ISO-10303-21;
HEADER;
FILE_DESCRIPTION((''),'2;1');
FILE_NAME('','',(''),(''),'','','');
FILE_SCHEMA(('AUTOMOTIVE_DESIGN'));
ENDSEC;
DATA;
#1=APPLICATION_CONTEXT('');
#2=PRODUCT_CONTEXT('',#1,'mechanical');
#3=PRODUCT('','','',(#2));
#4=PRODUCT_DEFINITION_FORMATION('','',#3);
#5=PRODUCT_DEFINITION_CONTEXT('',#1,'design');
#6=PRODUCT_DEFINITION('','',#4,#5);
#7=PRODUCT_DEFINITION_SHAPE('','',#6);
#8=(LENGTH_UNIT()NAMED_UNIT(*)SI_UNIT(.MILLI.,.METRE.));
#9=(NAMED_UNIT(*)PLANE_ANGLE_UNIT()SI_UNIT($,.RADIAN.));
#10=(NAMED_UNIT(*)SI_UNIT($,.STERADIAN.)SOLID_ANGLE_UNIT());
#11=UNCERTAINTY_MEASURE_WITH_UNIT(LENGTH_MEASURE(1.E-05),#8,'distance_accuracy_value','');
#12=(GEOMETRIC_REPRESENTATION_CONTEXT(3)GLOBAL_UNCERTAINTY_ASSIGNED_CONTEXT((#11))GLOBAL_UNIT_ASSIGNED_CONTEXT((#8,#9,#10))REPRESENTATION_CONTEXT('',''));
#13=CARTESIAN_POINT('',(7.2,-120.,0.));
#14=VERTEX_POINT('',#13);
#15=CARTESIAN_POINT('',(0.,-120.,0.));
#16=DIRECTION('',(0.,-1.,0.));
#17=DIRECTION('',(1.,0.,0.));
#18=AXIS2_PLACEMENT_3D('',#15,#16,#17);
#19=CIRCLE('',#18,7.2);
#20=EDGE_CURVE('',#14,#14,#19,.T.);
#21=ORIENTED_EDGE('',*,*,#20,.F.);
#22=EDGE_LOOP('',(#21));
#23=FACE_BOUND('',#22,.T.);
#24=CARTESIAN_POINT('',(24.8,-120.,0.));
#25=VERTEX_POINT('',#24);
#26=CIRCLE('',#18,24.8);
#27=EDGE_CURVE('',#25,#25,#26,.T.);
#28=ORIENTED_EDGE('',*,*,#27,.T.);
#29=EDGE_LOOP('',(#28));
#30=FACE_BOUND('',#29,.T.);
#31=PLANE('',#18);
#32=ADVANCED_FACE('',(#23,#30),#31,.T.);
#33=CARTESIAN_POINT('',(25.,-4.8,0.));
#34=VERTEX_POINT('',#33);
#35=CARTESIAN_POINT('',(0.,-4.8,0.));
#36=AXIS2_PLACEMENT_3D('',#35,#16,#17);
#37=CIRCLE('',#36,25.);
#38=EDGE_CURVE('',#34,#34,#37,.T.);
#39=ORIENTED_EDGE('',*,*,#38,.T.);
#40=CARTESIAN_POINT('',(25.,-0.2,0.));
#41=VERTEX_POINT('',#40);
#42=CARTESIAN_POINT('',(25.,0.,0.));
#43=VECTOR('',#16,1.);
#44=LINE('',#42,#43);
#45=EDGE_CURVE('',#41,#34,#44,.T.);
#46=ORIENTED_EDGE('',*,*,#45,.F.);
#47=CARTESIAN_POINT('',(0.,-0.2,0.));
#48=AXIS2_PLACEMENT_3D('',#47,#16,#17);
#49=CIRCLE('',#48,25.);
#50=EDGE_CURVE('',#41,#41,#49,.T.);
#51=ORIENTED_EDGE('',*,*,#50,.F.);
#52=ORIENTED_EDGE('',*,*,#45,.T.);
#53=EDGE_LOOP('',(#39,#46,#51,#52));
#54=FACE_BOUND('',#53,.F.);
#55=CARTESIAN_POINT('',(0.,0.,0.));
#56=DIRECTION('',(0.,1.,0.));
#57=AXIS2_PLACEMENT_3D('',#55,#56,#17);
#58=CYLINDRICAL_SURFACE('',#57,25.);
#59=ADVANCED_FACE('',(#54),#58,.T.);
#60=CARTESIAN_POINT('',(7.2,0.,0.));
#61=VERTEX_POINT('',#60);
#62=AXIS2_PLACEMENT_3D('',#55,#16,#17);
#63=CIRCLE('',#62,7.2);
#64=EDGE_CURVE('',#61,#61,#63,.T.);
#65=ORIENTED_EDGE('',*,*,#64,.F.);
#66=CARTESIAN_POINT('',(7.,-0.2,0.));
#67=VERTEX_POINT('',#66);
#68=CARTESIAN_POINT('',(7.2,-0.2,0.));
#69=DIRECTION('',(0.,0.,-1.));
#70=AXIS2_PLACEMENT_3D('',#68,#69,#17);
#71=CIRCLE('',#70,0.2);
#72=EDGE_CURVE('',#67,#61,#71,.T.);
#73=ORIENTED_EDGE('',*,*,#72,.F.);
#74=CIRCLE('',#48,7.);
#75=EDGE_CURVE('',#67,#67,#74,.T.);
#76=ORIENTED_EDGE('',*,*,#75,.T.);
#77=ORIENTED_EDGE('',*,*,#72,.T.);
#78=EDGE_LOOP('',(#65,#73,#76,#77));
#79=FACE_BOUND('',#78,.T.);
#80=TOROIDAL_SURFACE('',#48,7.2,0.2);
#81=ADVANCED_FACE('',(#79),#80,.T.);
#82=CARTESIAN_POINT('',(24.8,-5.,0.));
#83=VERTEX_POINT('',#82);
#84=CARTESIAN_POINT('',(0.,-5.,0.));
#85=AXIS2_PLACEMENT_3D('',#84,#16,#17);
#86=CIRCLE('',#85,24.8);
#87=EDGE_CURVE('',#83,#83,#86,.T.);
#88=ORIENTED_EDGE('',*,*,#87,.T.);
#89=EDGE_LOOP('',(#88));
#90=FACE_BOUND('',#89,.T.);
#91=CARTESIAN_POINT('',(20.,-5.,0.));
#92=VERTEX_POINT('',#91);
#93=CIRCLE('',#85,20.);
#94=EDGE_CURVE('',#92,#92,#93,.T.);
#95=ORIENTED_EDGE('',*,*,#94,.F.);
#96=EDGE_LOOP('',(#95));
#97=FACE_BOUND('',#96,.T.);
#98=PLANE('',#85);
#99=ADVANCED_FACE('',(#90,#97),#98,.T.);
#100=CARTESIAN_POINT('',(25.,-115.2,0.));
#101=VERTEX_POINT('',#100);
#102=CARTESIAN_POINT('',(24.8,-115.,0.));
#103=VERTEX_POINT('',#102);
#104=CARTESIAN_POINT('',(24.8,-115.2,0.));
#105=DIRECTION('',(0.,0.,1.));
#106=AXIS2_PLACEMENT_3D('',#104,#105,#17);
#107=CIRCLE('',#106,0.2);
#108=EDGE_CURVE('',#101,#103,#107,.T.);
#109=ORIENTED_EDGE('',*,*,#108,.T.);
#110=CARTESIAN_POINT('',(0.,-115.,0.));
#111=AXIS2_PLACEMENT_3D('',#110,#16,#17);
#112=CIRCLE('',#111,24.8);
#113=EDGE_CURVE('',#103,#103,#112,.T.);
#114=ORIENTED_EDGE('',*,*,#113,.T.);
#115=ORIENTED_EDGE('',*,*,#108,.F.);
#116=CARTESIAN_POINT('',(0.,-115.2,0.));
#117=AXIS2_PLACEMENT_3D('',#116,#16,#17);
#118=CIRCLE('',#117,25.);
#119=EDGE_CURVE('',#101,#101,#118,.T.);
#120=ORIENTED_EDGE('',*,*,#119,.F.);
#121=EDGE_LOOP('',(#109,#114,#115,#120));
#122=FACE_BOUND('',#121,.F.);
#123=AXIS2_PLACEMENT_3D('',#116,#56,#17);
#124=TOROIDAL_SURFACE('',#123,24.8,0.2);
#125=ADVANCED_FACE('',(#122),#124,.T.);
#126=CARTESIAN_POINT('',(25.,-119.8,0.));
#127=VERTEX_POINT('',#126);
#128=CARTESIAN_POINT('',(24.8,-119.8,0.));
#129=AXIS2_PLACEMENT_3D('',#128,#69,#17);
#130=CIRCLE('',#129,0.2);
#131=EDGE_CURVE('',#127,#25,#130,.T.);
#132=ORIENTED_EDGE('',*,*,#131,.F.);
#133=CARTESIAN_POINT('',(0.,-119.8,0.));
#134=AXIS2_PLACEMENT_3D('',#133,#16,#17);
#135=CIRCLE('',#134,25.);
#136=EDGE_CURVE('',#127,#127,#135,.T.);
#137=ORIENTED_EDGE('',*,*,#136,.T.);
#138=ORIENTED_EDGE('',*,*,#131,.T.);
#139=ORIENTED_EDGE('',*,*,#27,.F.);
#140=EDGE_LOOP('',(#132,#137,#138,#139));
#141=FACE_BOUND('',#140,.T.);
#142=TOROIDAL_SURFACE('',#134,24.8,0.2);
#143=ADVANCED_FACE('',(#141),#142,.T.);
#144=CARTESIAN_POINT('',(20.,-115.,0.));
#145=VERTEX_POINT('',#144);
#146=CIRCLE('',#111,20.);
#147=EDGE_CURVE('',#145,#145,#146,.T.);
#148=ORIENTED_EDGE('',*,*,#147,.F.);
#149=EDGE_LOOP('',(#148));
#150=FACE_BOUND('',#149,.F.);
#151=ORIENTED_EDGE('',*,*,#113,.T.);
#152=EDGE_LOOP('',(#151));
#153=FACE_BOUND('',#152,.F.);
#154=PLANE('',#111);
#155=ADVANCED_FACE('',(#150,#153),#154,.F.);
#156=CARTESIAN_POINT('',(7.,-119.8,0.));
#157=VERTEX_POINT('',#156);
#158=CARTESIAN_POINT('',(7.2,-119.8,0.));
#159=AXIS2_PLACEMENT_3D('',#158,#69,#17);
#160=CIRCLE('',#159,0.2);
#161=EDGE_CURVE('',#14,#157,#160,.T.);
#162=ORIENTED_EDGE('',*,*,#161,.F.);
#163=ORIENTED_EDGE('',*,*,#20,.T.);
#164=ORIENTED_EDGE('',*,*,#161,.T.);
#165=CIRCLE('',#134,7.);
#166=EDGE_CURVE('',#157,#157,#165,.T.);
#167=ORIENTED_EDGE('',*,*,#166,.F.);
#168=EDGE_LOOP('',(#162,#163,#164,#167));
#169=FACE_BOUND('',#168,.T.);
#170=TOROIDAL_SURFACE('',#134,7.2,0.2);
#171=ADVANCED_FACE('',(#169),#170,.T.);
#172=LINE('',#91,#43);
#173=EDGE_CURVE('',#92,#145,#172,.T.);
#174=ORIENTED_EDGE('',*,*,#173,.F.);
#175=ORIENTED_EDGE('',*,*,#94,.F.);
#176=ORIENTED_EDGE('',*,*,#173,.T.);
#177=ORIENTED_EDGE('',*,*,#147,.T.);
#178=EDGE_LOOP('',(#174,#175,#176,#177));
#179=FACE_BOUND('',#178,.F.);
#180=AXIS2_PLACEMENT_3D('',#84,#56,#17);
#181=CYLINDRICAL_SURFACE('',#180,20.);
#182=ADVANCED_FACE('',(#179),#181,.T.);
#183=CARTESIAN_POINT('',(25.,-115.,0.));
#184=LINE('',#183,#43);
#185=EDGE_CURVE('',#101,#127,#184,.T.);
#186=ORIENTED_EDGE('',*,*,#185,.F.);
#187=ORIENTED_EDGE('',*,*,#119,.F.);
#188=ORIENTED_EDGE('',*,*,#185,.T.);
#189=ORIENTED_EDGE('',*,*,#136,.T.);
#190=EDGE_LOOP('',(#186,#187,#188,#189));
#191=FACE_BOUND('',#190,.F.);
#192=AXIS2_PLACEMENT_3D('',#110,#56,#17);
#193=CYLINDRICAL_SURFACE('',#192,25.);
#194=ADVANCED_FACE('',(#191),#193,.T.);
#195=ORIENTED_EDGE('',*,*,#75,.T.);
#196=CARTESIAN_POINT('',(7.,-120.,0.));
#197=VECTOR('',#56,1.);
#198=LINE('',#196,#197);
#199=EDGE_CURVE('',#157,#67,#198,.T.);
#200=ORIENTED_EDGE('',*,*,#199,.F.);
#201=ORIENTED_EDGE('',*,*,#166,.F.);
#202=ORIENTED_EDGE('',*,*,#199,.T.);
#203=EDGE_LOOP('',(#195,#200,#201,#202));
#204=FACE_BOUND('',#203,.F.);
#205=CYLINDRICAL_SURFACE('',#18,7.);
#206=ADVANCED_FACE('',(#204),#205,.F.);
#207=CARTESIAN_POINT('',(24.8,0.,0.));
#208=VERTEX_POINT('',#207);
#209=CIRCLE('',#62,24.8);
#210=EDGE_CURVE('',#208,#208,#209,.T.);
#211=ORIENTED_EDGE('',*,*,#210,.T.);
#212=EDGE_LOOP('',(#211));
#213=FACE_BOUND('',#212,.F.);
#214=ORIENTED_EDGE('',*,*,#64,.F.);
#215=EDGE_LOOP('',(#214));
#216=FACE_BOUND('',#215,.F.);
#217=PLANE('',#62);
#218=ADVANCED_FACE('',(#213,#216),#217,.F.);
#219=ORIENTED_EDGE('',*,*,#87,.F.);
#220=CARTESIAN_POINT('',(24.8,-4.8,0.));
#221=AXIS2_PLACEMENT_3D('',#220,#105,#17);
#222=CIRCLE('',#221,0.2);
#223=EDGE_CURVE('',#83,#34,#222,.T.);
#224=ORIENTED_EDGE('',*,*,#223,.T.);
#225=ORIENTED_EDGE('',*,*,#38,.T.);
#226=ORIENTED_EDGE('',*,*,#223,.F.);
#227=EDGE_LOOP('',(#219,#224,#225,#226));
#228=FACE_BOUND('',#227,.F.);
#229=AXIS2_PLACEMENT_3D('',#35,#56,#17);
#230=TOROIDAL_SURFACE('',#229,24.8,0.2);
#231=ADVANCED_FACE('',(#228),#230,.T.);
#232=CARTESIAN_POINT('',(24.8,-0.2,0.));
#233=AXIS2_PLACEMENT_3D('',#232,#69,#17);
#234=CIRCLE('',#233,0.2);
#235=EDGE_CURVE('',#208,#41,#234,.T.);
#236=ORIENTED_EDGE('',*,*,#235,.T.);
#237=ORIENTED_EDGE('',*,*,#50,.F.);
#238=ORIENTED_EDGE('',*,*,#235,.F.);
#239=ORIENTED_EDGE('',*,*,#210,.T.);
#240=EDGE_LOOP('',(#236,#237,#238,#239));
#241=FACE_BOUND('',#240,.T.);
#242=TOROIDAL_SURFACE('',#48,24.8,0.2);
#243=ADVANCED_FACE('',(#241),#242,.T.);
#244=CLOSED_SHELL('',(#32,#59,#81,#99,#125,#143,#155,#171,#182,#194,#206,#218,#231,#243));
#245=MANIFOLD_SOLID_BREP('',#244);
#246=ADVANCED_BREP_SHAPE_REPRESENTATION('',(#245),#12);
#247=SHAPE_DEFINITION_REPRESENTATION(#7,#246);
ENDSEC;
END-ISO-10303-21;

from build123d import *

# Parameters (mm, degrees)
F0_R     = 25
F1_DEPTH = 5
F2_R     = 20
F3_DEPTH = 110
F5_R     = 25
F4_R     = 20
F6_DEPTH = 5
F7_R     = 7
F8_DEPTH = 200
F9_R     = 0.2


# Not quite as in the source:
# - a feature names something its author has since deleted; it is built from what else it names


with BuildPart() as f1:
    # F0 (on Front) → F1 (new body)
    with BuildSketch(Plane.XZ):
        Circle(F0_R)
    extrude(amount=F1_DEPTH)

    # F2 (on face) → F3 (join)
    with BuildSketch(Plane.XZ.offset(5)):
        Circle(F2_R)
    extrude(amount=F3_DEPTH)

    # F5 (on face) + F4 (on face) → F6 (join)
    with BuildSketch(Plane.XZ.offset(115)):
        Circle(F5_R)
    with BuildSketch(Plane.XZ.offset(115)):
        Circle(F4_R)
    extrude(amount=F6_DEPTH)

    # F7 (on face) → F8 (cut)
    with BuildSketch(Plane.XZ.offset(120)):
        Circle(F7_R)
    extrude(amount=-F8_DEPTH, mode=Mode.SUBTRACT)

    # F9
    f9_edges = [f1.edges().sort_by_distance(p)[0] for p in [
        (-25, -120, 0),
        (-7, -120, 0),
        (-25, -115, 0),
        (-25, -5, 0),
        (-25, 0, 0),
        (-7, 0, 0),
    ]]
    fillet(f9_edges, radius=F9_R)


solid = f1.part
